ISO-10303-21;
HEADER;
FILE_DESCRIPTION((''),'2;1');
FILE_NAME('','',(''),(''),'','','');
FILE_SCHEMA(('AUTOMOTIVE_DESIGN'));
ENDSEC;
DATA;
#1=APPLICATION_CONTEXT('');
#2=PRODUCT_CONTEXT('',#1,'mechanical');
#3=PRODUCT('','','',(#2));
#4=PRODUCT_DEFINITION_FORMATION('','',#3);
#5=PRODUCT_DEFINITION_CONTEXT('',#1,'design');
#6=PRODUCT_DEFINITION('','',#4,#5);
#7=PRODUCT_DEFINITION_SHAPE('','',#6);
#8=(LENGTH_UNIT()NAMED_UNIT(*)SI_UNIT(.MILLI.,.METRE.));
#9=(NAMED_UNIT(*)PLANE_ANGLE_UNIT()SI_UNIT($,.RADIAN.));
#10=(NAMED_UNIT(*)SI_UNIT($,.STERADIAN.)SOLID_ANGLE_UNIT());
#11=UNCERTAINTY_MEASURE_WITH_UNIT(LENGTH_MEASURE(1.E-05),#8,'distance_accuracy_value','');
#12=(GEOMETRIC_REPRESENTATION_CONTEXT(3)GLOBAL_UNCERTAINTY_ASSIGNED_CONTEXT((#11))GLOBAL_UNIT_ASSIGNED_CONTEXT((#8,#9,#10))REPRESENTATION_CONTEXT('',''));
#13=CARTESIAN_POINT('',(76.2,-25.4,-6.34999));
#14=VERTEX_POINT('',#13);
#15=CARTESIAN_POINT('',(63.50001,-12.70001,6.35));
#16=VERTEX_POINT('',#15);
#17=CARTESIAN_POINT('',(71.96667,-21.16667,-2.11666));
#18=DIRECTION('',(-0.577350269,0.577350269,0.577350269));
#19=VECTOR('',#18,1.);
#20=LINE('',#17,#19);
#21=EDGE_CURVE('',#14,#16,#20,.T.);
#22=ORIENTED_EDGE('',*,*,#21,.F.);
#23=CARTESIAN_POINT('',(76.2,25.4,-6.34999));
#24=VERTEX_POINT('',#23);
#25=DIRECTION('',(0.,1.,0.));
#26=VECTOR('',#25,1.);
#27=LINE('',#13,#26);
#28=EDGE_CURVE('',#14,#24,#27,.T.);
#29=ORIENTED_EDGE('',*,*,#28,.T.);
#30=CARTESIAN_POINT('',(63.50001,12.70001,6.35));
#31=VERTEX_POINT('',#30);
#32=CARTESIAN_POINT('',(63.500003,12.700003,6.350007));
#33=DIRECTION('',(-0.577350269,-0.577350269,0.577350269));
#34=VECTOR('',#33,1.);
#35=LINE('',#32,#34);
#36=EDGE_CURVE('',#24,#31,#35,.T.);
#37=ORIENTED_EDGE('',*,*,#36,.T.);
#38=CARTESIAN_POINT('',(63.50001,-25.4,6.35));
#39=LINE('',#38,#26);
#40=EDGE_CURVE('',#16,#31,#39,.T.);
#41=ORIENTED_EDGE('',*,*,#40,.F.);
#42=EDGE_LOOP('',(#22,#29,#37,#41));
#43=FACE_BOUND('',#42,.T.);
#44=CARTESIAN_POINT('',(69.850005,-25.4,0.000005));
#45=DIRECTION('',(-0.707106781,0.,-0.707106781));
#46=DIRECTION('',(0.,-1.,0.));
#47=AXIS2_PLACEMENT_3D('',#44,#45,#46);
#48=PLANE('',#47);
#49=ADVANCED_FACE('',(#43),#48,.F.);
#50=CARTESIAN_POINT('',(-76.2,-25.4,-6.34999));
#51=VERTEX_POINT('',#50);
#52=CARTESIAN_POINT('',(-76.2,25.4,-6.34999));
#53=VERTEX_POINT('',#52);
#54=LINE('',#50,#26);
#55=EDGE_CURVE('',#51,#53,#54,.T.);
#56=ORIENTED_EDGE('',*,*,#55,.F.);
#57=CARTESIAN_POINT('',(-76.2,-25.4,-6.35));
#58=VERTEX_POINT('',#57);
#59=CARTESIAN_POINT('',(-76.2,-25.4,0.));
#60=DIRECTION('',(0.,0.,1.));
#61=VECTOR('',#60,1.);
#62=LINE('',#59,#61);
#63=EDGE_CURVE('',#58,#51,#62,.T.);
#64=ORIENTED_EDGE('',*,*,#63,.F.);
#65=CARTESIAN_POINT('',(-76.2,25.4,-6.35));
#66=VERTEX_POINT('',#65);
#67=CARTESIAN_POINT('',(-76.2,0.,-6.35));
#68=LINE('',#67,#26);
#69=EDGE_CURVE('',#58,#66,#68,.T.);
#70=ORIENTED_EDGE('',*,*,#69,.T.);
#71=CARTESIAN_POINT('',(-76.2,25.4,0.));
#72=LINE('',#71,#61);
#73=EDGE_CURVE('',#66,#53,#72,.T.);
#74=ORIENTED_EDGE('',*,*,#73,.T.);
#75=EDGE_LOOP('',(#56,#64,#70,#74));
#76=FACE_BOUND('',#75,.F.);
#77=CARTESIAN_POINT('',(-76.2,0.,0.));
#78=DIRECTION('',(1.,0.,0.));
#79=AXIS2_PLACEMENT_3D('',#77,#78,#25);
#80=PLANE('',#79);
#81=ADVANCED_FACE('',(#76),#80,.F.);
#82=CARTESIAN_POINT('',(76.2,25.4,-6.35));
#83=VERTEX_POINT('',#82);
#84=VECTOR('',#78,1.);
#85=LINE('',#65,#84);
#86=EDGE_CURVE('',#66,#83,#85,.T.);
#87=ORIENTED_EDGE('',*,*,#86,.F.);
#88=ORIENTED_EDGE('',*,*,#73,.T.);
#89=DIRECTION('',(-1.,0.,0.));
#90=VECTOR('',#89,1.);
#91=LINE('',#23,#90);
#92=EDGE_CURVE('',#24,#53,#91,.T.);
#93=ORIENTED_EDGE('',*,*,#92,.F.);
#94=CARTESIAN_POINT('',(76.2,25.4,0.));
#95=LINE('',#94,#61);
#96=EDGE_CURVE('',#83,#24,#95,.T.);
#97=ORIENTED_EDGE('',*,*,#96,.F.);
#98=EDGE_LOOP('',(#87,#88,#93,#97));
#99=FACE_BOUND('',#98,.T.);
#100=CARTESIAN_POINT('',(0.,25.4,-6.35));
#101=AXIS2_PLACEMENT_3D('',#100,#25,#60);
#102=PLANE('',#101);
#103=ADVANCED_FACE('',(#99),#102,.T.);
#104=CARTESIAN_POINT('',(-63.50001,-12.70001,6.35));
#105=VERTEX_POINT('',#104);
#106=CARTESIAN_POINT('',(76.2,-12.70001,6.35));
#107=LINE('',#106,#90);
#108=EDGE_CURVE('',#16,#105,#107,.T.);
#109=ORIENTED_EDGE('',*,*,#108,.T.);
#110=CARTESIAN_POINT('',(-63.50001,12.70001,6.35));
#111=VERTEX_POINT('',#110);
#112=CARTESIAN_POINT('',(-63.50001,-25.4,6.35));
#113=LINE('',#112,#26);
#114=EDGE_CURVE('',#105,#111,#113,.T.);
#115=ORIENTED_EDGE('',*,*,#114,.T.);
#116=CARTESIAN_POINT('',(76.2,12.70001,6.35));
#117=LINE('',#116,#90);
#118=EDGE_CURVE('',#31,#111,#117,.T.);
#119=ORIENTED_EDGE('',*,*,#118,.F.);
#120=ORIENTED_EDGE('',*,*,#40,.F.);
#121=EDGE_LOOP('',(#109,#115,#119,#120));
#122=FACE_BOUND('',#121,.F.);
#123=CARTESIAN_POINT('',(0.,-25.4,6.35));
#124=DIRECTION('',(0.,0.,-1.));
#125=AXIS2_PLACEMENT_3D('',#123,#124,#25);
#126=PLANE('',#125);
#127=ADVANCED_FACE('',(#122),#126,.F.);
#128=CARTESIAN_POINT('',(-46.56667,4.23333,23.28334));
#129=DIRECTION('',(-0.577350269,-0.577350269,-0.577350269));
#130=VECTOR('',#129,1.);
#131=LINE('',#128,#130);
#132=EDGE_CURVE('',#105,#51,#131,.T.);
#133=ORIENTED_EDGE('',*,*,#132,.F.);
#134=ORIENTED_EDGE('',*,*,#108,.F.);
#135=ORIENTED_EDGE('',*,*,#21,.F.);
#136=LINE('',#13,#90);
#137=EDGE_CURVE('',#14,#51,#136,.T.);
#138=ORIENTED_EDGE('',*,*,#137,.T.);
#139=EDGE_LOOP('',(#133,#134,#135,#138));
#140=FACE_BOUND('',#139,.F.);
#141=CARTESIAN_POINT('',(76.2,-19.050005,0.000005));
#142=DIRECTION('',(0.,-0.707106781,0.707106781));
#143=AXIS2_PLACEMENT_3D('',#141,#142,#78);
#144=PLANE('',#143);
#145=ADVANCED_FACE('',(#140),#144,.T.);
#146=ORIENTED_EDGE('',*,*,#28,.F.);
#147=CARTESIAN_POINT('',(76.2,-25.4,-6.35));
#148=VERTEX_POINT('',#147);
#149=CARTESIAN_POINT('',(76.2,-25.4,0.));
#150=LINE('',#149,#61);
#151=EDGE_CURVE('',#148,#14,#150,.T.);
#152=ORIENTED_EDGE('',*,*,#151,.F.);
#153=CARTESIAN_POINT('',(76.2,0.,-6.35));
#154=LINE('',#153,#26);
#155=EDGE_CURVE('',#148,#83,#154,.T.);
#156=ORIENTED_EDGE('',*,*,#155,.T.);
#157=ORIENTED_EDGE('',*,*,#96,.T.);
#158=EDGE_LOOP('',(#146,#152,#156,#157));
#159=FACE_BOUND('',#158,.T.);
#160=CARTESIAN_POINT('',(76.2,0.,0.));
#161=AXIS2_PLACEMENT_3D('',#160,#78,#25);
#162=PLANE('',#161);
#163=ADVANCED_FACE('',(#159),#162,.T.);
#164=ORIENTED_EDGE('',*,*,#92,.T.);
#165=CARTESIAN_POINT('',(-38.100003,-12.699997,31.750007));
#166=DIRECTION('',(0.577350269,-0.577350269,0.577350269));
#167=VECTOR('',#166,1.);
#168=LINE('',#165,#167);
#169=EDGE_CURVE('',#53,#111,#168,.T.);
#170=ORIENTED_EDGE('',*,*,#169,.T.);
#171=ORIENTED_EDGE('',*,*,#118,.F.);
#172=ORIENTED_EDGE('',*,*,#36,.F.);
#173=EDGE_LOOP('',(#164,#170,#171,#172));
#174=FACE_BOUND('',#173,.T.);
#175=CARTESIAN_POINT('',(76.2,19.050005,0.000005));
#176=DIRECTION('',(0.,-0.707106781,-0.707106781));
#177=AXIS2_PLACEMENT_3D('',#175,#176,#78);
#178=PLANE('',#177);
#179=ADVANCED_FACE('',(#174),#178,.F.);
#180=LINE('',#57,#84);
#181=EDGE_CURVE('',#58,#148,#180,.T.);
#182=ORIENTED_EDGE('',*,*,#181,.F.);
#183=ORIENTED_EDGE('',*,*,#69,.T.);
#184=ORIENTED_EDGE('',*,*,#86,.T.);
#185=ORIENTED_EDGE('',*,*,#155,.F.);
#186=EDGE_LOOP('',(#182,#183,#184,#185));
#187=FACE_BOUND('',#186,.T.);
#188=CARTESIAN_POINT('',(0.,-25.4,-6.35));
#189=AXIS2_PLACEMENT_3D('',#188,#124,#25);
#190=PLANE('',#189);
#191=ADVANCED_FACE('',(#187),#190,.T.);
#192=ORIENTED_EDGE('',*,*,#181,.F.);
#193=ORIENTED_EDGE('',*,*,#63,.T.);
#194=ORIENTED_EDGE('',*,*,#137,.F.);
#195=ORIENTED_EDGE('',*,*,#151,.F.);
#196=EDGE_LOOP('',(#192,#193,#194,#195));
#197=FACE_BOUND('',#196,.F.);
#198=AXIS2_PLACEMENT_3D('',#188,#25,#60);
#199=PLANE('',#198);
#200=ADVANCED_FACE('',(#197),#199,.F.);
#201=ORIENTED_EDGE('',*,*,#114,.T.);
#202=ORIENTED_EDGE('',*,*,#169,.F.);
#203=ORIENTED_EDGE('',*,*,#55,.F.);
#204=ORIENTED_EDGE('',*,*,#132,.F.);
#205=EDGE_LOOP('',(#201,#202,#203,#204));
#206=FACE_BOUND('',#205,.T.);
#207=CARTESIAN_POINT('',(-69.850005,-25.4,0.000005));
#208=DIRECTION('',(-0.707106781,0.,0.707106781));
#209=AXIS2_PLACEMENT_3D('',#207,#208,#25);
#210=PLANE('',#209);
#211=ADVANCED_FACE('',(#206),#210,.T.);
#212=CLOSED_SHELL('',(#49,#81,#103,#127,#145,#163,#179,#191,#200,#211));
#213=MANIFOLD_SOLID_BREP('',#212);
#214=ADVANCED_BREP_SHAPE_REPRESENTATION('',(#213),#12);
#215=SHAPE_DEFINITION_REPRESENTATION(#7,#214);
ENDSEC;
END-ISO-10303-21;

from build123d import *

# Parameters (mm, degrees)
F0_W     = 50.8
F0_H     = 12.7
F1_DEPTH = 76.2
F2_SIZE  = 12.69999


# Not quite as in the source:
# - a fillet or chamfer is up to 0.001 mm smaller than in the source, because OpenCascade refuses the exact size


with BuildPart() as f1:
    # F0 (on Right) → F1 (new body, symmetric)
    with BuildSketch(Plane.YZ):
        Rectangle(F0_W, F0_H)
    extrude(amount=F1_DEPTH, both=True)

    # F2 (size 12.7 in the source; OpenCascade refuses exactly that, so slightly less here)
    f2_edges = [f1.edges().sort_by_distance(p)[0] for p in [
        (0, 25.4, 6.35),
        (-76.2, 0, 6.35),
        (0, -25.4, 6.35),
        (76.2, 0, 6.35),
    ]]
    chamfer(f2_edges, length=F2_SIZE)


solid = f1.part
